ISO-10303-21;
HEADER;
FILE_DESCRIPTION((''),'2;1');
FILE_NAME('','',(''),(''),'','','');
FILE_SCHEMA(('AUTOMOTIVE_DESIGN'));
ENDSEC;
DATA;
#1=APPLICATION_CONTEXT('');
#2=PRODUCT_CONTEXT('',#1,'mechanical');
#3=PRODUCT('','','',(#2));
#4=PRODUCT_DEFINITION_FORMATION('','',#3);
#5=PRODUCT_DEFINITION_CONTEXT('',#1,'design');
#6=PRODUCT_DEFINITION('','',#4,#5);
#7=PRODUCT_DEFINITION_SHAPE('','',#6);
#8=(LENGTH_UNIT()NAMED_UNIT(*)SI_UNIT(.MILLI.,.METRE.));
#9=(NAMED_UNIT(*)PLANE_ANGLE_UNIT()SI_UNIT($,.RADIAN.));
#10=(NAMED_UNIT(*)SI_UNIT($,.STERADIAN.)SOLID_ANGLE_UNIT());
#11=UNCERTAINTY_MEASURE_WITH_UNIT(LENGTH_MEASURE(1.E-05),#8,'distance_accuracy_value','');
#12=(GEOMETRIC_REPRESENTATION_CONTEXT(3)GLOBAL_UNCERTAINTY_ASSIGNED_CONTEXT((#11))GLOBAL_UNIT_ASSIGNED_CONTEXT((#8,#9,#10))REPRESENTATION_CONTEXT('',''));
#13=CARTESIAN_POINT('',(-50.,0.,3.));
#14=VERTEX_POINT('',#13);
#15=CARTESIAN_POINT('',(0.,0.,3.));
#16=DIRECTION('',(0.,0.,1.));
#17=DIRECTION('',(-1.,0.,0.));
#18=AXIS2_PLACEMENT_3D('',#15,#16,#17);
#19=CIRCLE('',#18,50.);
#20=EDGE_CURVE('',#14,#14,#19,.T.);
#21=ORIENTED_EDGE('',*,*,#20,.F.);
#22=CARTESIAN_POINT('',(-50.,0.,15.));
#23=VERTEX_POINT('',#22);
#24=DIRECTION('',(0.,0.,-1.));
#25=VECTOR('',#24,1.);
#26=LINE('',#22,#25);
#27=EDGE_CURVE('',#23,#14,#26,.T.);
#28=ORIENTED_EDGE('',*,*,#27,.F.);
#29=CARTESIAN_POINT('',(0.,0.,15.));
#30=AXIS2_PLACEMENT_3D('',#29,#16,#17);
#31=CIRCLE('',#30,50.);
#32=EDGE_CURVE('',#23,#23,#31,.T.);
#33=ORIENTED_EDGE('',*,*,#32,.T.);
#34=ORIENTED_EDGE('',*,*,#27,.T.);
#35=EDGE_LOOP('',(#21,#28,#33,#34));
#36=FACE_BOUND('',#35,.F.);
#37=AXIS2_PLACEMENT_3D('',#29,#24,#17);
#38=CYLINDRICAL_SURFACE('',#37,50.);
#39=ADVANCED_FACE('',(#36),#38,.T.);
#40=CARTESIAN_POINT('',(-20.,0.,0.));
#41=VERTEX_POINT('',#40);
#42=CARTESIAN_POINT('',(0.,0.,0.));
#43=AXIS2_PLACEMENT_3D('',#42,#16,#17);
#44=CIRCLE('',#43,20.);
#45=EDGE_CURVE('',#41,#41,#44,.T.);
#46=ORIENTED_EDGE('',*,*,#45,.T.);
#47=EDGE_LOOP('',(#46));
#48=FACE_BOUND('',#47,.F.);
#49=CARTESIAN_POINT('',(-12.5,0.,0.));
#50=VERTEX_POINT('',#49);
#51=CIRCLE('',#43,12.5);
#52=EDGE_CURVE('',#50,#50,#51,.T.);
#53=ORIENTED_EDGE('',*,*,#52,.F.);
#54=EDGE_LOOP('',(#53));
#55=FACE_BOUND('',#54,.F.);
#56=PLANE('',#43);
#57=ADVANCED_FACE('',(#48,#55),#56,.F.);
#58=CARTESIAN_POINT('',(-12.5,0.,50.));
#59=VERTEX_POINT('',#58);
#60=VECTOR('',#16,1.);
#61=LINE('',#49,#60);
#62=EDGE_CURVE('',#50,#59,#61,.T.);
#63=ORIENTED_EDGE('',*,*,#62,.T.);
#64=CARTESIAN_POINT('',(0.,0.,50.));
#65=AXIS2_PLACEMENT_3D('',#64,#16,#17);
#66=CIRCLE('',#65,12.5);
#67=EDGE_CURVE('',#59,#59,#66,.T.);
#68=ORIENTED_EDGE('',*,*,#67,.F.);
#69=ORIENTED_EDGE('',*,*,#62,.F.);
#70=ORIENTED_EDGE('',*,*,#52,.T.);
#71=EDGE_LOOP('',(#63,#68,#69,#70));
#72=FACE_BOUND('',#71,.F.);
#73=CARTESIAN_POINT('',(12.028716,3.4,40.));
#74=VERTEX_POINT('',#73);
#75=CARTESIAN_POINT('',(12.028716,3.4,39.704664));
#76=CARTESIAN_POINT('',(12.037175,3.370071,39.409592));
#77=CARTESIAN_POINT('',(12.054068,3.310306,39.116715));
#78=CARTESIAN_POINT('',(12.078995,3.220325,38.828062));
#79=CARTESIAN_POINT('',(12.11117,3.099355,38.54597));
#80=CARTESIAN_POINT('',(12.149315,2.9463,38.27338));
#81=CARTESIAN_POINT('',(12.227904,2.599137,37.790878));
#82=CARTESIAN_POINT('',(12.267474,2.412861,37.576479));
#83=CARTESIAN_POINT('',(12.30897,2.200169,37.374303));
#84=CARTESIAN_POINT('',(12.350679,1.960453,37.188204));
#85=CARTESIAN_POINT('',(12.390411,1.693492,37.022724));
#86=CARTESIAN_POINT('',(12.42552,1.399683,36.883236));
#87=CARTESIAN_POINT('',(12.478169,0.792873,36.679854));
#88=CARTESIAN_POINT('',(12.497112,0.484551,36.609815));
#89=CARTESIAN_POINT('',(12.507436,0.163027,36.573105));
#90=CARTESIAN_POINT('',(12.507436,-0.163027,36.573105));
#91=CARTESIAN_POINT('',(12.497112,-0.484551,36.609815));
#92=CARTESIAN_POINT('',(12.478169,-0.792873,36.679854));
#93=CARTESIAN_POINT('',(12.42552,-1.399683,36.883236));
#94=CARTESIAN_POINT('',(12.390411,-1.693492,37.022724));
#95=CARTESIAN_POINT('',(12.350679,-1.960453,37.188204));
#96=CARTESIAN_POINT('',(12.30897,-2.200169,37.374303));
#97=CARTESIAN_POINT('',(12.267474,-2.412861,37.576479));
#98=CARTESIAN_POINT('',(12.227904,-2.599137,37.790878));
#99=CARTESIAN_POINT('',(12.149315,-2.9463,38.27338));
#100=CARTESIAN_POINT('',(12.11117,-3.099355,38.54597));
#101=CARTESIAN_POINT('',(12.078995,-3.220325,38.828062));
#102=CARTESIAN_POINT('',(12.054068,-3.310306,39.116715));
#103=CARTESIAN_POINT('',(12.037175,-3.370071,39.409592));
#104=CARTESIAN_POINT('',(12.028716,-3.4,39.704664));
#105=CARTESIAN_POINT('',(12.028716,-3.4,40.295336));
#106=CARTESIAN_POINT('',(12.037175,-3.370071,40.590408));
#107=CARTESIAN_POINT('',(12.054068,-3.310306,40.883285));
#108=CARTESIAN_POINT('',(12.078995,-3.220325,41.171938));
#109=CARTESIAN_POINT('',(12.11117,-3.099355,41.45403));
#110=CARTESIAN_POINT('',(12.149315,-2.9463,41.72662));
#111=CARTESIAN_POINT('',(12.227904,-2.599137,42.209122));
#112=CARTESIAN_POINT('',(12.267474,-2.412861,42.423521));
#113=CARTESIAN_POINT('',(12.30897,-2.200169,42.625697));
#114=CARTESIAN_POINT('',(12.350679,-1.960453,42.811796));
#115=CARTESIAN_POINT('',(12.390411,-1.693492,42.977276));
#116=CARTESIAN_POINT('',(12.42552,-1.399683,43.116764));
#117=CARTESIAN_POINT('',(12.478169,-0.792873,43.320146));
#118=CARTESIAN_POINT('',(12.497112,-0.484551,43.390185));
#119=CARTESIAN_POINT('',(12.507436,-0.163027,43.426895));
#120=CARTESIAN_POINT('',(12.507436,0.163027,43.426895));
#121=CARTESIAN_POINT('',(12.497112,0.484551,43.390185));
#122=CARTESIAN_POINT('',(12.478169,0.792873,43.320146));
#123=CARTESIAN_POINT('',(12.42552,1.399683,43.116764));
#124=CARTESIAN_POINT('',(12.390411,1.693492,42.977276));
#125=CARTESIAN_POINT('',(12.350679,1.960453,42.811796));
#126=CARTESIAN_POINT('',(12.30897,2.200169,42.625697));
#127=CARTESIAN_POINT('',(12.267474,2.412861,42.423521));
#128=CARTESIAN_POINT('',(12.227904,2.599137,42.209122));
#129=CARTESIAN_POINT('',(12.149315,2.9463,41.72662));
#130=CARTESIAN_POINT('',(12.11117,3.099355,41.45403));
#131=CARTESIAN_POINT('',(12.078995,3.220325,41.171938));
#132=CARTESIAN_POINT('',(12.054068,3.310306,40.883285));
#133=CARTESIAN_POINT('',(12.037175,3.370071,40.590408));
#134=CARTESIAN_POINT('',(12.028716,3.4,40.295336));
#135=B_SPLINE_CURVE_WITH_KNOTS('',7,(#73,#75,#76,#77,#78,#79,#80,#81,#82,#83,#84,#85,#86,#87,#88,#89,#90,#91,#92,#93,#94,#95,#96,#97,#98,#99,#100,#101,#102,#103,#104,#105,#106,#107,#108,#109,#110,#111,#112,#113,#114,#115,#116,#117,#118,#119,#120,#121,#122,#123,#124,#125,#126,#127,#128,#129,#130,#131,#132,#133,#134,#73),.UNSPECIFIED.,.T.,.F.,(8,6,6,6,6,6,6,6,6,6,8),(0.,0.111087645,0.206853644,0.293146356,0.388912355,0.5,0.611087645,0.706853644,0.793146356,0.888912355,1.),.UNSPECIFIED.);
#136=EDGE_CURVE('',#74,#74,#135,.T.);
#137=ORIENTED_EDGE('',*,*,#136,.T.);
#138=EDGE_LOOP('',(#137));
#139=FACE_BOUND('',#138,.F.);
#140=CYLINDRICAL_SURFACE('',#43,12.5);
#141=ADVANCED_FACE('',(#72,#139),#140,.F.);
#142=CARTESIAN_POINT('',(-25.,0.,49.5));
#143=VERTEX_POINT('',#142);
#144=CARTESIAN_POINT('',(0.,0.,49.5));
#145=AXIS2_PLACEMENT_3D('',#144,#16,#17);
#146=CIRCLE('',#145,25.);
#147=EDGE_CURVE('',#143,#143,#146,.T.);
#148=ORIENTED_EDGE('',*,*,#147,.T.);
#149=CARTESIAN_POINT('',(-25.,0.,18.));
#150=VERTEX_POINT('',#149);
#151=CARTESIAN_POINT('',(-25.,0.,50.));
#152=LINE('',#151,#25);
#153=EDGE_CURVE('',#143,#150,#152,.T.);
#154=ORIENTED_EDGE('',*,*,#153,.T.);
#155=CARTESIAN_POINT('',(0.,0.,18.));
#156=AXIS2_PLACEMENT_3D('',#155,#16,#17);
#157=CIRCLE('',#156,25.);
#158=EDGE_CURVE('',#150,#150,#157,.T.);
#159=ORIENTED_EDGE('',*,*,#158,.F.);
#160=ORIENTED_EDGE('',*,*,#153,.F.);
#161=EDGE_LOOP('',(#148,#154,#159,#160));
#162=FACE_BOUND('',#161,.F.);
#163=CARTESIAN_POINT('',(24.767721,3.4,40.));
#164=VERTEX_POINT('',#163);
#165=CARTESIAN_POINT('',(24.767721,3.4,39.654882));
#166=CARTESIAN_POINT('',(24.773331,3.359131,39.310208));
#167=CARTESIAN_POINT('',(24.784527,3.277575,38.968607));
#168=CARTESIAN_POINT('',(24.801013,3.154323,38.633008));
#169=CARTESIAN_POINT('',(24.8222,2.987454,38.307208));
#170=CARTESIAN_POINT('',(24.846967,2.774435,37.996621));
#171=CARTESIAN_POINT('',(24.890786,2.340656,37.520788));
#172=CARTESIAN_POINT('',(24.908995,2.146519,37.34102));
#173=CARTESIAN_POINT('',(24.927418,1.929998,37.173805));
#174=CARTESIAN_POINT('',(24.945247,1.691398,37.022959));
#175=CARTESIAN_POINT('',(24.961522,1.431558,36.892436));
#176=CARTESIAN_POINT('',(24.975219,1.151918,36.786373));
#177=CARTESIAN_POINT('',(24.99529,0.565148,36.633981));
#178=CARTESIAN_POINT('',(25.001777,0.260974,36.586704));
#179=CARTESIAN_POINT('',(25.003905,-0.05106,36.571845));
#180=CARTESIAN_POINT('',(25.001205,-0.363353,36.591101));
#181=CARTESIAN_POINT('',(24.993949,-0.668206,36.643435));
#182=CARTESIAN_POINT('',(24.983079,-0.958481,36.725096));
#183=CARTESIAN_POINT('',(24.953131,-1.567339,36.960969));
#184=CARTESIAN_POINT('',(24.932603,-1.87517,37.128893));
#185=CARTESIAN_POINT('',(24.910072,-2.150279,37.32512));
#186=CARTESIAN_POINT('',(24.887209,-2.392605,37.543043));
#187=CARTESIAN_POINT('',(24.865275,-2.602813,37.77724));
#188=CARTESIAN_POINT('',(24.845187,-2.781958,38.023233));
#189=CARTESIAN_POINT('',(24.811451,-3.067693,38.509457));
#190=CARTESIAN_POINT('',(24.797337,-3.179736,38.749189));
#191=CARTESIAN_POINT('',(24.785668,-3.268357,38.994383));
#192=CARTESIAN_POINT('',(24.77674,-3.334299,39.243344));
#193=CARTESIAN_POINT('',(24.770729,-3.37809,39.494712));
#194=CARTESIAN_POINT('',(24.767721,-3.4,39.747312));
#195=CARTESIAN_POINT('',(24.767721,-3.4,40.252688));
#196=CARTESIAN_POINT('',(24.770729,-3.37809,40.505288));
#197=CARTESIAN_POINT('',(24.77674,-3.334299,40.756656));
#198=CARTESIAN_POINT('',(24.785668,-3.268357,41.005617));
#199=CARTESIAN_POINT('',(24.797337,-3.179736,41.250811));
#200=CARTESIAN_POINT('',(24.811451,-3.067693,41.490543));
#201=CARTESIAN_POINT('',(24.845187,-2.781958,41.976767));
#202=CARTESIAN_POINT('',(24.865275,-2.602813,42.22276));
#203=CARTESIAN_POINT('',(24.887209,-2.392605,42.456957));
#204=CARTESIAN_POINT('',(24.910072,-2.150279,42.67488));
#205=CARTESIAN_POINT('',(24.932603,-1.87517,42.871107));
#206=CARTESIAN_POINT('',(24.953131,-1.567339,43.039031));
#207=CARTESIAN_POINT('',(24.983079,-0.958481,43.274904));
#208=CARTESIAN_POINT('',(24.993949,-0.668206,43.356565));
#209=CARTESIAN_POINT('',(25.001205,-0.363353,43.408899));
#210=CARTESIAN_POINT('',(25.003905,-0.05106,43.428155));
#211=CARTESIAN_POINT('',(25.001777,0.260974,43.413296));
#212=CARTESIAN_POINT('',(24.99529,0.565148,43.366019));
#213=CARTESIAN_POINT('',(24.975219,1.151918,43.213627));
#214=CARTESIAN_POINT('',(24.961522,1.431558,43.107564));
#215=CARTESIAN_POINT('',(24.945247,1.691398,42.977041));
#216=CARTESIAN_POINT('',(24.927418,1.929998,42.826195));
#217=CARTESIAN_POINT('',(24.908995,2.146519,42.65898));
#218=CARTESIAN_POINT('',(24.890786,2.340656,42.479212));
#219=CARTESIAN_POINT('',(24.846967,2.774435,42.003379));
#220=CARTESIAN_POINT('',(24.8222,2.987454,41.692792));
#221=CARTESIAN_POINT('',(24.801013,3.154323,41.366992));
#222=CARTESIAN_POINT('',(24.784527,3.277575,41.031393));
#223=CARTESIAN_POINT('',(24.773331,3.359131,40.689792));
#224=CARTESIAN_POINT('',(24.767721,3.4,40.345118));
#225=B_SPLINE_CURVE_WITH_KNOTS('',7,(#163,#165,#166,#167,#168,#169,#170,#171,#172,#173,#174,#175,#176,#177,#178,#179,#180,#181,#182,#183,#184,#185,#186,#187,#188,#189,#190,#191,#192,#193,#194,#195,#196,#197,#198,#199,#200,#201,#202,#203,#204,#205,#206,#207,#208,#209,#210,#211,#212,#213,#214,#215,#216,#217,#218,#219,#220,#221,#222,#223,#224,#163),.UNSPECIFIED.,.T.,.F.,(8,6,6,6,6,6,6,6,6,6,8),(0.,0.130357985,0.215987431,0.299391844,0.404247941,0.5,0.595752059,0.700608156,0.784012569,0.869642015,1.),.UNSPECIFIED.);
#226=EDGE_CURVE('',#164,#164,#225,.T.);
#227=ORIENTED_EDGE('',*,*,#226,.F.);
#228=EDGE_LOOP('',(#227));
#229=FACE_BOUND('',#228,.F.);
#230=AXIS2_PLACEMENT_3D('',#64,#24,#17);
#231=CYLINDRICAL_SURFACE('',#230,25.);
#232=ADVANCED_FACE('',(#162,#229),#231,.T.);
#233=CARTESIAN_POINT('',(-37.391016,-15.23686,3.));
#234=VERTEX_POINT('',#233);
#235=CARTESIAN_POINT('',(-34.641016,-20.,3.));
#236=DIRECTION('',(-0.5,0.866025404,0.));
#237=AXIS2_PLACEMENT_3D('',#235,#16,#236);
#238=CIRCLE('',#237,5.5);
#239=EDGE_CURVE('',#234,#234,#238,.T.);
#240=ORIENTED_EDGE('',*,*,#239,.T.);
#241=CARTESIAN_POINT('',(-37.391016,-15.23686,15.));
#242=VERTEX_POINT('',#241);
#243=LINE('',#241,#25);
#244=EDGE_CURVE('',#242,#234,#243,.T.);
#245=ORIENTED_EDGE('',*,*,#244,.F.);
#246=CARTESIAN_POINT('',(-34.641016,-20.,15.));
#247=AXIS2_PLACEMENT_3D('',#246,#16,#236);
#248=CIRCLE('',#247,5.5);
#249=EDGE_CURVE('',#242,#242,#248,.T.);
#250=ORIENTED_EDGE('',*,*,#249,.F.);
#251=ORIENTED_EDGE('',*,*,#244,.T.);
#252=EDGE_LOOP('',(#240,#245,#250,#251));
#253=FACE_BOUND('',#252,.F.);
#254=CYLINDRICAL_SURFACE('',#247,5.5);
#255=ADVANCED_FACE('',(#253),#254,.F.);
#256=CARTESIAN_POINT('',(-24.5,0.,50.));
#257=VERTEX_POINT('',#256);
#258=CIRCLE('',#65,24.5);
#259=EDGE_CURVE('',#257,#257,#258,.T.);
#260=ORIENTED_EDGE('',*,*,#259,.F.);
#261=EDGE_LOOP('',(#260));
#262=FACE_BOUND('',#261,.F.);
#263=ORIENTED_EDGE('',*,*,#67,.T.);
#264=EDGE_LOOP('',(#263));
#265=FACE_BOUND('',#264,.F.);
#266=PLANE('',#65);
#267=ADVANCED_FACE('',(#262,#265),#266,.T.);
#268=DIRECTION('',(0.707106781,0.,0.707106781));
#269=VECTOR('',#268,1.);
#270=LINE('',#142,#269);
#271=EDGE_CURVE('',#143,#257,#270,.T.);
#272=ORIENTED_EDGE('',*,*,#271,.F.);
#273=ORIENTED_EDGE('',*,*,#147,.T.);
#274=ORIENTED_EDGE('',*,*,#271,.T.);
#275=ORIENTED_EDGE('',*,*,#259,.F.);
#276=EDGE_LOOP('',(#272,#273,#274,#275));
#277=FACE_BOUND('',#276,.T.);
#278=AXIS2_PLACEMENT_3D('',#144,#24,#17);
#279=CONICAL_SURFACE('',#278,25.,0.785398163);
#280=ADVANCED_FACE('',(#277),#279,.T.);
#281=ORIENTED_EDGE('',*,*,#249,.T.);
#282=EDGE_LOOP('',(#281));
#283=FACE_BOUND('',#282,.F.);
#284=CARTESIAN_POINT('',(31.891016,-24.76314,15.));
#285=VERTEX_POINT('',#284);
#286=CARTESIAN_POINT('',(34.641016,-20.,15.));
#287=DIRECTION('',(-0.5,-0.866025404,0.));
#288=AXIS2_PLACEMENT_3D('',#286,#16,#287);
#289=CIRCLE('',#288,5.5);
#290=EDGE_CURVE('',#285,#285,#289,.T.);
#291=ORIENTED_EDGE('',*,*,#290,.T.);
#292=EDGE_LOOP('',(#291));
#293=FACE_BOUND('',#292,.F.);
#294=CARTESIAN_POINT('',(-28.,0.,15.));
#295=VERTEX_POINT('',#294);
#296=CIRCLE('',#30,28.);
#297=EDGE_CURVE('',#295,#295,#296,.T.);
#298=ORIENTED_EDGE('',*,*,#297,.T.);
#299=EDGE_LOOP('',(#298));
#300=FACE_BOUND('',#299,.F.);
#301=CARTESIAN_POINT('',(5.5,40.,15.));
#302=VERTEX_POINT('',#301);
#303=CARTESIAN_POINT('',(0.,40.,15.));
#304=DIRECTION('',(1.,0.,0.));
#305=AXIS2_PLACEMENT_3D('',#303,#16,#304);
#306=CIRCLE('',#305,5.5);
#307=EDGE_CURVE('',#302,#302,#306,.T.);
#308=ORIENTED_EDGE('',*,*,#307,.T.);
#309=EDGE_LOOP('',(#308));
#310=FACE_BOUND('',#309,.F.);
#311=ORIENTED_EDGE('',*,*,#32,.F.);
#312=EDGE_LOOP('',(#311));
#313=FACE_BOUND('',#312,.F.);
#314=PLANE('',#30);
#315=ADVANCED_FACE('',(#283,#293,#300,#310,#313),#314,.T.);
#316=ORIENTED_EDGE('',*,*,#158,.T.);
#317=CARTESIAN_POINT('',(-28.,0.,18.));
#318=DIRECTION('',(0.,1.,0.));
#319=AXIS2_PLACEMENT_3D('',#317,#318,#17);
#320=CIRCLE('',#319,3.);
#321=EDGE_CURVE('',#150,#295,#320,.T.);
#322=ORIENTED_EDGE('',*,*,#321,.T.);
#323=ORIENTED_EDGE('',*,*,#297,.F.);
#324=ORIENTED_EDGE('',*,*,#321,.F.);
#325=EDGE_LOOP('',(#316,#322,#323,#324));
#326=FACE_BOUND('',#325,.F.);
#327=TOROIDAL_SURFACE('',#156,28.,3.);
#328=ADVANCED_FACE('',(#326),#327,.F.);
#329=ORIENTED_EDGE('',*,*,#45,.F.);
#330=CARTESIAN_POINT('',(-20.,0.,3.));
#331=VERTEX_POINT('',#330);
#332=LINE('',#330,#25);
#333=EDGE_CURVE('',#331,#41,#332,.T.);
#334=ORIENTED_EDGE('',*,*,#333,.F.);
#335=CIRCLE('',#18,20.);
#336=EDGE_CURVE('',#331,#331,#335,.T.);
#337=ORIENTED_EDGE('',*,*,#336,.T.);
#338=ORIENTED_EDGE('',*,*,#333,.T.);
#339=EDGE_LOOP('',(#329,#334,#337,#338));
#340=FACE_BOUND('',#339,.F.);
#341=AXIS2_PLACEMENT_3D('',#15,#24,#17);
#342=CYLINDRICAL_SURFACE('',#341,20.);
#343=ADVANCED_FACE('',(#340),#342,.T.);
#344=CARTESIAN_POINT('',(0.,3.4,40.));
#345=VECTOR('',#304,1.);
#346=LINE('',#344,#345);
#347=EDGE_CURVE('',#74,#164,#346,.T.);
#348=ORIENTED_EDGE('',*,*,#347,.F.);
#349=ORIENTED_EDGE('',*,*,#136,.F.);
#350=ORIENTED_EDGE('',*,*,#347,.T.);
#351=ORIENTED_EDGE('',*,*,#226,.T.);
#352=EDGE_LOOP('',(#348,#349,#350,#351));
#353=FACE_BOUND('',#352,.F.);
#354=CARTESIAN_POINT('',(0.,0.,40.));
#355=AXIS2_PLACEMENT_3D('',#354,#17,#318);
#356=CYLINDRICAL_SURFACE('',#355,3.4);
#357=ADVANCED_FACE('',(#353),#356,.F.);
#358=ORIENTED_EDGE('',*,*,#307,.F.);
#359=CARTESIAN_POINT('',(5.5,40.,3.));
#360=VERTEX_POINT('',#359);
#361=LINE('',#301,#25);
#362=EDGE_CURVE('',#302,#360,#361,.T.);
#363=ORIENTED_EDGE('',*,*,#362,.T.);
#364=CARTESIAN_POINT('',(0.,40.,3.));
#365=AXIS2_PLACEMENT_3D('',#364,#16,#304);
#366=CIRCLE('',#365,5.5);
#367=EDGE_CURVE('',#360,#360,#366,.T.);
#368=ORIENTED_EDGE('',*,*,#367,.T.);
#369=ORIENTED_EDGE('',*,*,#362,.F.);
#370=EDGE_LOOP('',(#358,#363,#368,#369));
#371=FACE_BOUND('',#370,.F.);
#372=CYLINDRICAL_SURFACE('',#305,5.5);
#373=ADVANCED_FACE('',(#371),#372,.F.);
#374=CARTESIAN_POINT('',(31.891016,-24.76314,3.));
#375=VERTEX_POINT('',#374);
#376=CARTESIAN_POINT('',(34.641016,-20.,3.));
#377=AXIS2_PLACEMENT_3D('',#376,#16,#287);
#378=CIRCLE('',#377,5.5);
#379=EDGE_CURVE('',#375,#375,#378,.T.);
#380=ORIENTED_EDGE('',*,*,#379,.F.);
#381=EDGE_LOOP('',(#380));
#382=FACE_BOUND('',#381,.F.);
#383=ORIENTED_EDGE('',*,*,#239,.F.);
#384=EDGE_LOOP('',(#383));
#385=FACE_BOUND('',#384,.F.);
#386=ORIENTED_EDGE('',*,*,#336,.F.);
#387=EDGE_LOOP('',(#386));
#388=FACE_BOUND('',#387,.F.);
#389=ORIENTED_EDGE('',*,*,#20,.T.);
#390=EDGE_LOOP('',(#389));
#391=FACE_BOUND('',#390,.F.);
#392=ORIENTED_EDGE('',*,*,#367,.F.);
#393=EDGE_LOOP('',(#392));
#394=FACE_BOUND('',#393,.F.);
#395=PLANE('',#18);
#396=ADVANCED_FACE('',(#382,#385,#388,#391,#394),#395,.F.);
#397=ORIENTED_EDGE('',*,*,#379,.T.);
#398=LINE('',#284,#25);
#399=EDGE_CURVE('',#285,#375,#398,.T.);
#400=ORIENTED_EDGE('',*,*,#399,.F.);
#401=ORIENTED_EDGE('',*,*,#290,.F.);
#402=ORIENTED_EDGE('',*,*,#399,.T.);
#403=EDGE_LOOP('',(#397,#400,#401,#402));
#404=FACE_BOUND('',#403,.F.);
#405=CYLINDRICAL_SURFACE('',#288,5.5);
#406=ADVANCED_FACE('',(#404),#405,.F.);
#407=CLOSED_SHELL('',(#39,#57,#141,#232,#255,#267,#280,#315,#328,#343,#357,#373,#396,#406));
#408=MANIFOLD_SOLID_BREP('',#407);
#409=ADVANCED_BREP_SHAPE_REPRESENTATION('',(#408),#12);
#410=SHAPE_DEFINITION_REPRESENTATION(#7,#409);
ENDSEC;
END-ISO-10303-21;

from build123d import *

# Parameters (mm, degrees)
F2_R            = 3
F4_D            = 6.8
F4_DEPTH        = 50.001
F5_R            = 5.5
F6_DEPTH        = 15.0010001
F6_COPIES_COUNT = 3
F7_SIZE         = 0.5


# Not quite as in the source:
# - a pattern or mirror of a feature is missing from the dataset's text; its kind, count and spacing are read off the source's solid


with BuildPart() as f1:
    # F0 (on Front) → F1 (revolve)
    with BuildSketch(Plane.XZ):
        Polygon((-20, 0), (-12.5, 0), (-12.5, 50), (-25, 50), (-25, 15), (-50, 15), (-50, 3), (-20, 3), align=None)
    revolve(axis=Axis((0, 0, 33.7237479181), (0, 0, 1)))

    # F2
    f2_edges = [f1.edges().sort_by_distance(p)[0] for p in [
        (25, 0, 15),
    ]]
    fillet(f2_edges, radius=F2_R)

    # F4 (through all, one way)
    with BuildSketch(Plane(origin=(0, 0, 0), x_dir=(0, 1, 0), z_dir=(-1, 0, 0))):
        with Locations((0, -40)):
            Circle(F4_D / 2)
    extrude(amount=-F4_DEPTH, mode=Mode.SUBTRACT)

    # F5 (on face) → F6 (cut, through all)
    with BuildSketch(Plane.XY.offset(15)):
        with Locations((0, 40)):
            Circle(F5_R)
    f6 = extrude(amount=-F6_DEPTH, mode=Mode.SUBTRACT)

    # F6_copies: F6 ×3 about axis
    f6_copies_axis = Axis((0, 0, 0), (0, 0, 1))
    for i in range(1, F6_COPIES_COUNT):
        add(f6.rotate(f6_copies_axis, i * 360 / F6_COPIES_COUNT), mode=Mode.SUBTRACT)

    # F7
    f7_edges = [f1.edges().sort_by_distance(p)[0] for p in [
        (25, 0, 50),
    ]]
    chamfer(f7_edges, length=F7_SIZE)


solid = f1.part
